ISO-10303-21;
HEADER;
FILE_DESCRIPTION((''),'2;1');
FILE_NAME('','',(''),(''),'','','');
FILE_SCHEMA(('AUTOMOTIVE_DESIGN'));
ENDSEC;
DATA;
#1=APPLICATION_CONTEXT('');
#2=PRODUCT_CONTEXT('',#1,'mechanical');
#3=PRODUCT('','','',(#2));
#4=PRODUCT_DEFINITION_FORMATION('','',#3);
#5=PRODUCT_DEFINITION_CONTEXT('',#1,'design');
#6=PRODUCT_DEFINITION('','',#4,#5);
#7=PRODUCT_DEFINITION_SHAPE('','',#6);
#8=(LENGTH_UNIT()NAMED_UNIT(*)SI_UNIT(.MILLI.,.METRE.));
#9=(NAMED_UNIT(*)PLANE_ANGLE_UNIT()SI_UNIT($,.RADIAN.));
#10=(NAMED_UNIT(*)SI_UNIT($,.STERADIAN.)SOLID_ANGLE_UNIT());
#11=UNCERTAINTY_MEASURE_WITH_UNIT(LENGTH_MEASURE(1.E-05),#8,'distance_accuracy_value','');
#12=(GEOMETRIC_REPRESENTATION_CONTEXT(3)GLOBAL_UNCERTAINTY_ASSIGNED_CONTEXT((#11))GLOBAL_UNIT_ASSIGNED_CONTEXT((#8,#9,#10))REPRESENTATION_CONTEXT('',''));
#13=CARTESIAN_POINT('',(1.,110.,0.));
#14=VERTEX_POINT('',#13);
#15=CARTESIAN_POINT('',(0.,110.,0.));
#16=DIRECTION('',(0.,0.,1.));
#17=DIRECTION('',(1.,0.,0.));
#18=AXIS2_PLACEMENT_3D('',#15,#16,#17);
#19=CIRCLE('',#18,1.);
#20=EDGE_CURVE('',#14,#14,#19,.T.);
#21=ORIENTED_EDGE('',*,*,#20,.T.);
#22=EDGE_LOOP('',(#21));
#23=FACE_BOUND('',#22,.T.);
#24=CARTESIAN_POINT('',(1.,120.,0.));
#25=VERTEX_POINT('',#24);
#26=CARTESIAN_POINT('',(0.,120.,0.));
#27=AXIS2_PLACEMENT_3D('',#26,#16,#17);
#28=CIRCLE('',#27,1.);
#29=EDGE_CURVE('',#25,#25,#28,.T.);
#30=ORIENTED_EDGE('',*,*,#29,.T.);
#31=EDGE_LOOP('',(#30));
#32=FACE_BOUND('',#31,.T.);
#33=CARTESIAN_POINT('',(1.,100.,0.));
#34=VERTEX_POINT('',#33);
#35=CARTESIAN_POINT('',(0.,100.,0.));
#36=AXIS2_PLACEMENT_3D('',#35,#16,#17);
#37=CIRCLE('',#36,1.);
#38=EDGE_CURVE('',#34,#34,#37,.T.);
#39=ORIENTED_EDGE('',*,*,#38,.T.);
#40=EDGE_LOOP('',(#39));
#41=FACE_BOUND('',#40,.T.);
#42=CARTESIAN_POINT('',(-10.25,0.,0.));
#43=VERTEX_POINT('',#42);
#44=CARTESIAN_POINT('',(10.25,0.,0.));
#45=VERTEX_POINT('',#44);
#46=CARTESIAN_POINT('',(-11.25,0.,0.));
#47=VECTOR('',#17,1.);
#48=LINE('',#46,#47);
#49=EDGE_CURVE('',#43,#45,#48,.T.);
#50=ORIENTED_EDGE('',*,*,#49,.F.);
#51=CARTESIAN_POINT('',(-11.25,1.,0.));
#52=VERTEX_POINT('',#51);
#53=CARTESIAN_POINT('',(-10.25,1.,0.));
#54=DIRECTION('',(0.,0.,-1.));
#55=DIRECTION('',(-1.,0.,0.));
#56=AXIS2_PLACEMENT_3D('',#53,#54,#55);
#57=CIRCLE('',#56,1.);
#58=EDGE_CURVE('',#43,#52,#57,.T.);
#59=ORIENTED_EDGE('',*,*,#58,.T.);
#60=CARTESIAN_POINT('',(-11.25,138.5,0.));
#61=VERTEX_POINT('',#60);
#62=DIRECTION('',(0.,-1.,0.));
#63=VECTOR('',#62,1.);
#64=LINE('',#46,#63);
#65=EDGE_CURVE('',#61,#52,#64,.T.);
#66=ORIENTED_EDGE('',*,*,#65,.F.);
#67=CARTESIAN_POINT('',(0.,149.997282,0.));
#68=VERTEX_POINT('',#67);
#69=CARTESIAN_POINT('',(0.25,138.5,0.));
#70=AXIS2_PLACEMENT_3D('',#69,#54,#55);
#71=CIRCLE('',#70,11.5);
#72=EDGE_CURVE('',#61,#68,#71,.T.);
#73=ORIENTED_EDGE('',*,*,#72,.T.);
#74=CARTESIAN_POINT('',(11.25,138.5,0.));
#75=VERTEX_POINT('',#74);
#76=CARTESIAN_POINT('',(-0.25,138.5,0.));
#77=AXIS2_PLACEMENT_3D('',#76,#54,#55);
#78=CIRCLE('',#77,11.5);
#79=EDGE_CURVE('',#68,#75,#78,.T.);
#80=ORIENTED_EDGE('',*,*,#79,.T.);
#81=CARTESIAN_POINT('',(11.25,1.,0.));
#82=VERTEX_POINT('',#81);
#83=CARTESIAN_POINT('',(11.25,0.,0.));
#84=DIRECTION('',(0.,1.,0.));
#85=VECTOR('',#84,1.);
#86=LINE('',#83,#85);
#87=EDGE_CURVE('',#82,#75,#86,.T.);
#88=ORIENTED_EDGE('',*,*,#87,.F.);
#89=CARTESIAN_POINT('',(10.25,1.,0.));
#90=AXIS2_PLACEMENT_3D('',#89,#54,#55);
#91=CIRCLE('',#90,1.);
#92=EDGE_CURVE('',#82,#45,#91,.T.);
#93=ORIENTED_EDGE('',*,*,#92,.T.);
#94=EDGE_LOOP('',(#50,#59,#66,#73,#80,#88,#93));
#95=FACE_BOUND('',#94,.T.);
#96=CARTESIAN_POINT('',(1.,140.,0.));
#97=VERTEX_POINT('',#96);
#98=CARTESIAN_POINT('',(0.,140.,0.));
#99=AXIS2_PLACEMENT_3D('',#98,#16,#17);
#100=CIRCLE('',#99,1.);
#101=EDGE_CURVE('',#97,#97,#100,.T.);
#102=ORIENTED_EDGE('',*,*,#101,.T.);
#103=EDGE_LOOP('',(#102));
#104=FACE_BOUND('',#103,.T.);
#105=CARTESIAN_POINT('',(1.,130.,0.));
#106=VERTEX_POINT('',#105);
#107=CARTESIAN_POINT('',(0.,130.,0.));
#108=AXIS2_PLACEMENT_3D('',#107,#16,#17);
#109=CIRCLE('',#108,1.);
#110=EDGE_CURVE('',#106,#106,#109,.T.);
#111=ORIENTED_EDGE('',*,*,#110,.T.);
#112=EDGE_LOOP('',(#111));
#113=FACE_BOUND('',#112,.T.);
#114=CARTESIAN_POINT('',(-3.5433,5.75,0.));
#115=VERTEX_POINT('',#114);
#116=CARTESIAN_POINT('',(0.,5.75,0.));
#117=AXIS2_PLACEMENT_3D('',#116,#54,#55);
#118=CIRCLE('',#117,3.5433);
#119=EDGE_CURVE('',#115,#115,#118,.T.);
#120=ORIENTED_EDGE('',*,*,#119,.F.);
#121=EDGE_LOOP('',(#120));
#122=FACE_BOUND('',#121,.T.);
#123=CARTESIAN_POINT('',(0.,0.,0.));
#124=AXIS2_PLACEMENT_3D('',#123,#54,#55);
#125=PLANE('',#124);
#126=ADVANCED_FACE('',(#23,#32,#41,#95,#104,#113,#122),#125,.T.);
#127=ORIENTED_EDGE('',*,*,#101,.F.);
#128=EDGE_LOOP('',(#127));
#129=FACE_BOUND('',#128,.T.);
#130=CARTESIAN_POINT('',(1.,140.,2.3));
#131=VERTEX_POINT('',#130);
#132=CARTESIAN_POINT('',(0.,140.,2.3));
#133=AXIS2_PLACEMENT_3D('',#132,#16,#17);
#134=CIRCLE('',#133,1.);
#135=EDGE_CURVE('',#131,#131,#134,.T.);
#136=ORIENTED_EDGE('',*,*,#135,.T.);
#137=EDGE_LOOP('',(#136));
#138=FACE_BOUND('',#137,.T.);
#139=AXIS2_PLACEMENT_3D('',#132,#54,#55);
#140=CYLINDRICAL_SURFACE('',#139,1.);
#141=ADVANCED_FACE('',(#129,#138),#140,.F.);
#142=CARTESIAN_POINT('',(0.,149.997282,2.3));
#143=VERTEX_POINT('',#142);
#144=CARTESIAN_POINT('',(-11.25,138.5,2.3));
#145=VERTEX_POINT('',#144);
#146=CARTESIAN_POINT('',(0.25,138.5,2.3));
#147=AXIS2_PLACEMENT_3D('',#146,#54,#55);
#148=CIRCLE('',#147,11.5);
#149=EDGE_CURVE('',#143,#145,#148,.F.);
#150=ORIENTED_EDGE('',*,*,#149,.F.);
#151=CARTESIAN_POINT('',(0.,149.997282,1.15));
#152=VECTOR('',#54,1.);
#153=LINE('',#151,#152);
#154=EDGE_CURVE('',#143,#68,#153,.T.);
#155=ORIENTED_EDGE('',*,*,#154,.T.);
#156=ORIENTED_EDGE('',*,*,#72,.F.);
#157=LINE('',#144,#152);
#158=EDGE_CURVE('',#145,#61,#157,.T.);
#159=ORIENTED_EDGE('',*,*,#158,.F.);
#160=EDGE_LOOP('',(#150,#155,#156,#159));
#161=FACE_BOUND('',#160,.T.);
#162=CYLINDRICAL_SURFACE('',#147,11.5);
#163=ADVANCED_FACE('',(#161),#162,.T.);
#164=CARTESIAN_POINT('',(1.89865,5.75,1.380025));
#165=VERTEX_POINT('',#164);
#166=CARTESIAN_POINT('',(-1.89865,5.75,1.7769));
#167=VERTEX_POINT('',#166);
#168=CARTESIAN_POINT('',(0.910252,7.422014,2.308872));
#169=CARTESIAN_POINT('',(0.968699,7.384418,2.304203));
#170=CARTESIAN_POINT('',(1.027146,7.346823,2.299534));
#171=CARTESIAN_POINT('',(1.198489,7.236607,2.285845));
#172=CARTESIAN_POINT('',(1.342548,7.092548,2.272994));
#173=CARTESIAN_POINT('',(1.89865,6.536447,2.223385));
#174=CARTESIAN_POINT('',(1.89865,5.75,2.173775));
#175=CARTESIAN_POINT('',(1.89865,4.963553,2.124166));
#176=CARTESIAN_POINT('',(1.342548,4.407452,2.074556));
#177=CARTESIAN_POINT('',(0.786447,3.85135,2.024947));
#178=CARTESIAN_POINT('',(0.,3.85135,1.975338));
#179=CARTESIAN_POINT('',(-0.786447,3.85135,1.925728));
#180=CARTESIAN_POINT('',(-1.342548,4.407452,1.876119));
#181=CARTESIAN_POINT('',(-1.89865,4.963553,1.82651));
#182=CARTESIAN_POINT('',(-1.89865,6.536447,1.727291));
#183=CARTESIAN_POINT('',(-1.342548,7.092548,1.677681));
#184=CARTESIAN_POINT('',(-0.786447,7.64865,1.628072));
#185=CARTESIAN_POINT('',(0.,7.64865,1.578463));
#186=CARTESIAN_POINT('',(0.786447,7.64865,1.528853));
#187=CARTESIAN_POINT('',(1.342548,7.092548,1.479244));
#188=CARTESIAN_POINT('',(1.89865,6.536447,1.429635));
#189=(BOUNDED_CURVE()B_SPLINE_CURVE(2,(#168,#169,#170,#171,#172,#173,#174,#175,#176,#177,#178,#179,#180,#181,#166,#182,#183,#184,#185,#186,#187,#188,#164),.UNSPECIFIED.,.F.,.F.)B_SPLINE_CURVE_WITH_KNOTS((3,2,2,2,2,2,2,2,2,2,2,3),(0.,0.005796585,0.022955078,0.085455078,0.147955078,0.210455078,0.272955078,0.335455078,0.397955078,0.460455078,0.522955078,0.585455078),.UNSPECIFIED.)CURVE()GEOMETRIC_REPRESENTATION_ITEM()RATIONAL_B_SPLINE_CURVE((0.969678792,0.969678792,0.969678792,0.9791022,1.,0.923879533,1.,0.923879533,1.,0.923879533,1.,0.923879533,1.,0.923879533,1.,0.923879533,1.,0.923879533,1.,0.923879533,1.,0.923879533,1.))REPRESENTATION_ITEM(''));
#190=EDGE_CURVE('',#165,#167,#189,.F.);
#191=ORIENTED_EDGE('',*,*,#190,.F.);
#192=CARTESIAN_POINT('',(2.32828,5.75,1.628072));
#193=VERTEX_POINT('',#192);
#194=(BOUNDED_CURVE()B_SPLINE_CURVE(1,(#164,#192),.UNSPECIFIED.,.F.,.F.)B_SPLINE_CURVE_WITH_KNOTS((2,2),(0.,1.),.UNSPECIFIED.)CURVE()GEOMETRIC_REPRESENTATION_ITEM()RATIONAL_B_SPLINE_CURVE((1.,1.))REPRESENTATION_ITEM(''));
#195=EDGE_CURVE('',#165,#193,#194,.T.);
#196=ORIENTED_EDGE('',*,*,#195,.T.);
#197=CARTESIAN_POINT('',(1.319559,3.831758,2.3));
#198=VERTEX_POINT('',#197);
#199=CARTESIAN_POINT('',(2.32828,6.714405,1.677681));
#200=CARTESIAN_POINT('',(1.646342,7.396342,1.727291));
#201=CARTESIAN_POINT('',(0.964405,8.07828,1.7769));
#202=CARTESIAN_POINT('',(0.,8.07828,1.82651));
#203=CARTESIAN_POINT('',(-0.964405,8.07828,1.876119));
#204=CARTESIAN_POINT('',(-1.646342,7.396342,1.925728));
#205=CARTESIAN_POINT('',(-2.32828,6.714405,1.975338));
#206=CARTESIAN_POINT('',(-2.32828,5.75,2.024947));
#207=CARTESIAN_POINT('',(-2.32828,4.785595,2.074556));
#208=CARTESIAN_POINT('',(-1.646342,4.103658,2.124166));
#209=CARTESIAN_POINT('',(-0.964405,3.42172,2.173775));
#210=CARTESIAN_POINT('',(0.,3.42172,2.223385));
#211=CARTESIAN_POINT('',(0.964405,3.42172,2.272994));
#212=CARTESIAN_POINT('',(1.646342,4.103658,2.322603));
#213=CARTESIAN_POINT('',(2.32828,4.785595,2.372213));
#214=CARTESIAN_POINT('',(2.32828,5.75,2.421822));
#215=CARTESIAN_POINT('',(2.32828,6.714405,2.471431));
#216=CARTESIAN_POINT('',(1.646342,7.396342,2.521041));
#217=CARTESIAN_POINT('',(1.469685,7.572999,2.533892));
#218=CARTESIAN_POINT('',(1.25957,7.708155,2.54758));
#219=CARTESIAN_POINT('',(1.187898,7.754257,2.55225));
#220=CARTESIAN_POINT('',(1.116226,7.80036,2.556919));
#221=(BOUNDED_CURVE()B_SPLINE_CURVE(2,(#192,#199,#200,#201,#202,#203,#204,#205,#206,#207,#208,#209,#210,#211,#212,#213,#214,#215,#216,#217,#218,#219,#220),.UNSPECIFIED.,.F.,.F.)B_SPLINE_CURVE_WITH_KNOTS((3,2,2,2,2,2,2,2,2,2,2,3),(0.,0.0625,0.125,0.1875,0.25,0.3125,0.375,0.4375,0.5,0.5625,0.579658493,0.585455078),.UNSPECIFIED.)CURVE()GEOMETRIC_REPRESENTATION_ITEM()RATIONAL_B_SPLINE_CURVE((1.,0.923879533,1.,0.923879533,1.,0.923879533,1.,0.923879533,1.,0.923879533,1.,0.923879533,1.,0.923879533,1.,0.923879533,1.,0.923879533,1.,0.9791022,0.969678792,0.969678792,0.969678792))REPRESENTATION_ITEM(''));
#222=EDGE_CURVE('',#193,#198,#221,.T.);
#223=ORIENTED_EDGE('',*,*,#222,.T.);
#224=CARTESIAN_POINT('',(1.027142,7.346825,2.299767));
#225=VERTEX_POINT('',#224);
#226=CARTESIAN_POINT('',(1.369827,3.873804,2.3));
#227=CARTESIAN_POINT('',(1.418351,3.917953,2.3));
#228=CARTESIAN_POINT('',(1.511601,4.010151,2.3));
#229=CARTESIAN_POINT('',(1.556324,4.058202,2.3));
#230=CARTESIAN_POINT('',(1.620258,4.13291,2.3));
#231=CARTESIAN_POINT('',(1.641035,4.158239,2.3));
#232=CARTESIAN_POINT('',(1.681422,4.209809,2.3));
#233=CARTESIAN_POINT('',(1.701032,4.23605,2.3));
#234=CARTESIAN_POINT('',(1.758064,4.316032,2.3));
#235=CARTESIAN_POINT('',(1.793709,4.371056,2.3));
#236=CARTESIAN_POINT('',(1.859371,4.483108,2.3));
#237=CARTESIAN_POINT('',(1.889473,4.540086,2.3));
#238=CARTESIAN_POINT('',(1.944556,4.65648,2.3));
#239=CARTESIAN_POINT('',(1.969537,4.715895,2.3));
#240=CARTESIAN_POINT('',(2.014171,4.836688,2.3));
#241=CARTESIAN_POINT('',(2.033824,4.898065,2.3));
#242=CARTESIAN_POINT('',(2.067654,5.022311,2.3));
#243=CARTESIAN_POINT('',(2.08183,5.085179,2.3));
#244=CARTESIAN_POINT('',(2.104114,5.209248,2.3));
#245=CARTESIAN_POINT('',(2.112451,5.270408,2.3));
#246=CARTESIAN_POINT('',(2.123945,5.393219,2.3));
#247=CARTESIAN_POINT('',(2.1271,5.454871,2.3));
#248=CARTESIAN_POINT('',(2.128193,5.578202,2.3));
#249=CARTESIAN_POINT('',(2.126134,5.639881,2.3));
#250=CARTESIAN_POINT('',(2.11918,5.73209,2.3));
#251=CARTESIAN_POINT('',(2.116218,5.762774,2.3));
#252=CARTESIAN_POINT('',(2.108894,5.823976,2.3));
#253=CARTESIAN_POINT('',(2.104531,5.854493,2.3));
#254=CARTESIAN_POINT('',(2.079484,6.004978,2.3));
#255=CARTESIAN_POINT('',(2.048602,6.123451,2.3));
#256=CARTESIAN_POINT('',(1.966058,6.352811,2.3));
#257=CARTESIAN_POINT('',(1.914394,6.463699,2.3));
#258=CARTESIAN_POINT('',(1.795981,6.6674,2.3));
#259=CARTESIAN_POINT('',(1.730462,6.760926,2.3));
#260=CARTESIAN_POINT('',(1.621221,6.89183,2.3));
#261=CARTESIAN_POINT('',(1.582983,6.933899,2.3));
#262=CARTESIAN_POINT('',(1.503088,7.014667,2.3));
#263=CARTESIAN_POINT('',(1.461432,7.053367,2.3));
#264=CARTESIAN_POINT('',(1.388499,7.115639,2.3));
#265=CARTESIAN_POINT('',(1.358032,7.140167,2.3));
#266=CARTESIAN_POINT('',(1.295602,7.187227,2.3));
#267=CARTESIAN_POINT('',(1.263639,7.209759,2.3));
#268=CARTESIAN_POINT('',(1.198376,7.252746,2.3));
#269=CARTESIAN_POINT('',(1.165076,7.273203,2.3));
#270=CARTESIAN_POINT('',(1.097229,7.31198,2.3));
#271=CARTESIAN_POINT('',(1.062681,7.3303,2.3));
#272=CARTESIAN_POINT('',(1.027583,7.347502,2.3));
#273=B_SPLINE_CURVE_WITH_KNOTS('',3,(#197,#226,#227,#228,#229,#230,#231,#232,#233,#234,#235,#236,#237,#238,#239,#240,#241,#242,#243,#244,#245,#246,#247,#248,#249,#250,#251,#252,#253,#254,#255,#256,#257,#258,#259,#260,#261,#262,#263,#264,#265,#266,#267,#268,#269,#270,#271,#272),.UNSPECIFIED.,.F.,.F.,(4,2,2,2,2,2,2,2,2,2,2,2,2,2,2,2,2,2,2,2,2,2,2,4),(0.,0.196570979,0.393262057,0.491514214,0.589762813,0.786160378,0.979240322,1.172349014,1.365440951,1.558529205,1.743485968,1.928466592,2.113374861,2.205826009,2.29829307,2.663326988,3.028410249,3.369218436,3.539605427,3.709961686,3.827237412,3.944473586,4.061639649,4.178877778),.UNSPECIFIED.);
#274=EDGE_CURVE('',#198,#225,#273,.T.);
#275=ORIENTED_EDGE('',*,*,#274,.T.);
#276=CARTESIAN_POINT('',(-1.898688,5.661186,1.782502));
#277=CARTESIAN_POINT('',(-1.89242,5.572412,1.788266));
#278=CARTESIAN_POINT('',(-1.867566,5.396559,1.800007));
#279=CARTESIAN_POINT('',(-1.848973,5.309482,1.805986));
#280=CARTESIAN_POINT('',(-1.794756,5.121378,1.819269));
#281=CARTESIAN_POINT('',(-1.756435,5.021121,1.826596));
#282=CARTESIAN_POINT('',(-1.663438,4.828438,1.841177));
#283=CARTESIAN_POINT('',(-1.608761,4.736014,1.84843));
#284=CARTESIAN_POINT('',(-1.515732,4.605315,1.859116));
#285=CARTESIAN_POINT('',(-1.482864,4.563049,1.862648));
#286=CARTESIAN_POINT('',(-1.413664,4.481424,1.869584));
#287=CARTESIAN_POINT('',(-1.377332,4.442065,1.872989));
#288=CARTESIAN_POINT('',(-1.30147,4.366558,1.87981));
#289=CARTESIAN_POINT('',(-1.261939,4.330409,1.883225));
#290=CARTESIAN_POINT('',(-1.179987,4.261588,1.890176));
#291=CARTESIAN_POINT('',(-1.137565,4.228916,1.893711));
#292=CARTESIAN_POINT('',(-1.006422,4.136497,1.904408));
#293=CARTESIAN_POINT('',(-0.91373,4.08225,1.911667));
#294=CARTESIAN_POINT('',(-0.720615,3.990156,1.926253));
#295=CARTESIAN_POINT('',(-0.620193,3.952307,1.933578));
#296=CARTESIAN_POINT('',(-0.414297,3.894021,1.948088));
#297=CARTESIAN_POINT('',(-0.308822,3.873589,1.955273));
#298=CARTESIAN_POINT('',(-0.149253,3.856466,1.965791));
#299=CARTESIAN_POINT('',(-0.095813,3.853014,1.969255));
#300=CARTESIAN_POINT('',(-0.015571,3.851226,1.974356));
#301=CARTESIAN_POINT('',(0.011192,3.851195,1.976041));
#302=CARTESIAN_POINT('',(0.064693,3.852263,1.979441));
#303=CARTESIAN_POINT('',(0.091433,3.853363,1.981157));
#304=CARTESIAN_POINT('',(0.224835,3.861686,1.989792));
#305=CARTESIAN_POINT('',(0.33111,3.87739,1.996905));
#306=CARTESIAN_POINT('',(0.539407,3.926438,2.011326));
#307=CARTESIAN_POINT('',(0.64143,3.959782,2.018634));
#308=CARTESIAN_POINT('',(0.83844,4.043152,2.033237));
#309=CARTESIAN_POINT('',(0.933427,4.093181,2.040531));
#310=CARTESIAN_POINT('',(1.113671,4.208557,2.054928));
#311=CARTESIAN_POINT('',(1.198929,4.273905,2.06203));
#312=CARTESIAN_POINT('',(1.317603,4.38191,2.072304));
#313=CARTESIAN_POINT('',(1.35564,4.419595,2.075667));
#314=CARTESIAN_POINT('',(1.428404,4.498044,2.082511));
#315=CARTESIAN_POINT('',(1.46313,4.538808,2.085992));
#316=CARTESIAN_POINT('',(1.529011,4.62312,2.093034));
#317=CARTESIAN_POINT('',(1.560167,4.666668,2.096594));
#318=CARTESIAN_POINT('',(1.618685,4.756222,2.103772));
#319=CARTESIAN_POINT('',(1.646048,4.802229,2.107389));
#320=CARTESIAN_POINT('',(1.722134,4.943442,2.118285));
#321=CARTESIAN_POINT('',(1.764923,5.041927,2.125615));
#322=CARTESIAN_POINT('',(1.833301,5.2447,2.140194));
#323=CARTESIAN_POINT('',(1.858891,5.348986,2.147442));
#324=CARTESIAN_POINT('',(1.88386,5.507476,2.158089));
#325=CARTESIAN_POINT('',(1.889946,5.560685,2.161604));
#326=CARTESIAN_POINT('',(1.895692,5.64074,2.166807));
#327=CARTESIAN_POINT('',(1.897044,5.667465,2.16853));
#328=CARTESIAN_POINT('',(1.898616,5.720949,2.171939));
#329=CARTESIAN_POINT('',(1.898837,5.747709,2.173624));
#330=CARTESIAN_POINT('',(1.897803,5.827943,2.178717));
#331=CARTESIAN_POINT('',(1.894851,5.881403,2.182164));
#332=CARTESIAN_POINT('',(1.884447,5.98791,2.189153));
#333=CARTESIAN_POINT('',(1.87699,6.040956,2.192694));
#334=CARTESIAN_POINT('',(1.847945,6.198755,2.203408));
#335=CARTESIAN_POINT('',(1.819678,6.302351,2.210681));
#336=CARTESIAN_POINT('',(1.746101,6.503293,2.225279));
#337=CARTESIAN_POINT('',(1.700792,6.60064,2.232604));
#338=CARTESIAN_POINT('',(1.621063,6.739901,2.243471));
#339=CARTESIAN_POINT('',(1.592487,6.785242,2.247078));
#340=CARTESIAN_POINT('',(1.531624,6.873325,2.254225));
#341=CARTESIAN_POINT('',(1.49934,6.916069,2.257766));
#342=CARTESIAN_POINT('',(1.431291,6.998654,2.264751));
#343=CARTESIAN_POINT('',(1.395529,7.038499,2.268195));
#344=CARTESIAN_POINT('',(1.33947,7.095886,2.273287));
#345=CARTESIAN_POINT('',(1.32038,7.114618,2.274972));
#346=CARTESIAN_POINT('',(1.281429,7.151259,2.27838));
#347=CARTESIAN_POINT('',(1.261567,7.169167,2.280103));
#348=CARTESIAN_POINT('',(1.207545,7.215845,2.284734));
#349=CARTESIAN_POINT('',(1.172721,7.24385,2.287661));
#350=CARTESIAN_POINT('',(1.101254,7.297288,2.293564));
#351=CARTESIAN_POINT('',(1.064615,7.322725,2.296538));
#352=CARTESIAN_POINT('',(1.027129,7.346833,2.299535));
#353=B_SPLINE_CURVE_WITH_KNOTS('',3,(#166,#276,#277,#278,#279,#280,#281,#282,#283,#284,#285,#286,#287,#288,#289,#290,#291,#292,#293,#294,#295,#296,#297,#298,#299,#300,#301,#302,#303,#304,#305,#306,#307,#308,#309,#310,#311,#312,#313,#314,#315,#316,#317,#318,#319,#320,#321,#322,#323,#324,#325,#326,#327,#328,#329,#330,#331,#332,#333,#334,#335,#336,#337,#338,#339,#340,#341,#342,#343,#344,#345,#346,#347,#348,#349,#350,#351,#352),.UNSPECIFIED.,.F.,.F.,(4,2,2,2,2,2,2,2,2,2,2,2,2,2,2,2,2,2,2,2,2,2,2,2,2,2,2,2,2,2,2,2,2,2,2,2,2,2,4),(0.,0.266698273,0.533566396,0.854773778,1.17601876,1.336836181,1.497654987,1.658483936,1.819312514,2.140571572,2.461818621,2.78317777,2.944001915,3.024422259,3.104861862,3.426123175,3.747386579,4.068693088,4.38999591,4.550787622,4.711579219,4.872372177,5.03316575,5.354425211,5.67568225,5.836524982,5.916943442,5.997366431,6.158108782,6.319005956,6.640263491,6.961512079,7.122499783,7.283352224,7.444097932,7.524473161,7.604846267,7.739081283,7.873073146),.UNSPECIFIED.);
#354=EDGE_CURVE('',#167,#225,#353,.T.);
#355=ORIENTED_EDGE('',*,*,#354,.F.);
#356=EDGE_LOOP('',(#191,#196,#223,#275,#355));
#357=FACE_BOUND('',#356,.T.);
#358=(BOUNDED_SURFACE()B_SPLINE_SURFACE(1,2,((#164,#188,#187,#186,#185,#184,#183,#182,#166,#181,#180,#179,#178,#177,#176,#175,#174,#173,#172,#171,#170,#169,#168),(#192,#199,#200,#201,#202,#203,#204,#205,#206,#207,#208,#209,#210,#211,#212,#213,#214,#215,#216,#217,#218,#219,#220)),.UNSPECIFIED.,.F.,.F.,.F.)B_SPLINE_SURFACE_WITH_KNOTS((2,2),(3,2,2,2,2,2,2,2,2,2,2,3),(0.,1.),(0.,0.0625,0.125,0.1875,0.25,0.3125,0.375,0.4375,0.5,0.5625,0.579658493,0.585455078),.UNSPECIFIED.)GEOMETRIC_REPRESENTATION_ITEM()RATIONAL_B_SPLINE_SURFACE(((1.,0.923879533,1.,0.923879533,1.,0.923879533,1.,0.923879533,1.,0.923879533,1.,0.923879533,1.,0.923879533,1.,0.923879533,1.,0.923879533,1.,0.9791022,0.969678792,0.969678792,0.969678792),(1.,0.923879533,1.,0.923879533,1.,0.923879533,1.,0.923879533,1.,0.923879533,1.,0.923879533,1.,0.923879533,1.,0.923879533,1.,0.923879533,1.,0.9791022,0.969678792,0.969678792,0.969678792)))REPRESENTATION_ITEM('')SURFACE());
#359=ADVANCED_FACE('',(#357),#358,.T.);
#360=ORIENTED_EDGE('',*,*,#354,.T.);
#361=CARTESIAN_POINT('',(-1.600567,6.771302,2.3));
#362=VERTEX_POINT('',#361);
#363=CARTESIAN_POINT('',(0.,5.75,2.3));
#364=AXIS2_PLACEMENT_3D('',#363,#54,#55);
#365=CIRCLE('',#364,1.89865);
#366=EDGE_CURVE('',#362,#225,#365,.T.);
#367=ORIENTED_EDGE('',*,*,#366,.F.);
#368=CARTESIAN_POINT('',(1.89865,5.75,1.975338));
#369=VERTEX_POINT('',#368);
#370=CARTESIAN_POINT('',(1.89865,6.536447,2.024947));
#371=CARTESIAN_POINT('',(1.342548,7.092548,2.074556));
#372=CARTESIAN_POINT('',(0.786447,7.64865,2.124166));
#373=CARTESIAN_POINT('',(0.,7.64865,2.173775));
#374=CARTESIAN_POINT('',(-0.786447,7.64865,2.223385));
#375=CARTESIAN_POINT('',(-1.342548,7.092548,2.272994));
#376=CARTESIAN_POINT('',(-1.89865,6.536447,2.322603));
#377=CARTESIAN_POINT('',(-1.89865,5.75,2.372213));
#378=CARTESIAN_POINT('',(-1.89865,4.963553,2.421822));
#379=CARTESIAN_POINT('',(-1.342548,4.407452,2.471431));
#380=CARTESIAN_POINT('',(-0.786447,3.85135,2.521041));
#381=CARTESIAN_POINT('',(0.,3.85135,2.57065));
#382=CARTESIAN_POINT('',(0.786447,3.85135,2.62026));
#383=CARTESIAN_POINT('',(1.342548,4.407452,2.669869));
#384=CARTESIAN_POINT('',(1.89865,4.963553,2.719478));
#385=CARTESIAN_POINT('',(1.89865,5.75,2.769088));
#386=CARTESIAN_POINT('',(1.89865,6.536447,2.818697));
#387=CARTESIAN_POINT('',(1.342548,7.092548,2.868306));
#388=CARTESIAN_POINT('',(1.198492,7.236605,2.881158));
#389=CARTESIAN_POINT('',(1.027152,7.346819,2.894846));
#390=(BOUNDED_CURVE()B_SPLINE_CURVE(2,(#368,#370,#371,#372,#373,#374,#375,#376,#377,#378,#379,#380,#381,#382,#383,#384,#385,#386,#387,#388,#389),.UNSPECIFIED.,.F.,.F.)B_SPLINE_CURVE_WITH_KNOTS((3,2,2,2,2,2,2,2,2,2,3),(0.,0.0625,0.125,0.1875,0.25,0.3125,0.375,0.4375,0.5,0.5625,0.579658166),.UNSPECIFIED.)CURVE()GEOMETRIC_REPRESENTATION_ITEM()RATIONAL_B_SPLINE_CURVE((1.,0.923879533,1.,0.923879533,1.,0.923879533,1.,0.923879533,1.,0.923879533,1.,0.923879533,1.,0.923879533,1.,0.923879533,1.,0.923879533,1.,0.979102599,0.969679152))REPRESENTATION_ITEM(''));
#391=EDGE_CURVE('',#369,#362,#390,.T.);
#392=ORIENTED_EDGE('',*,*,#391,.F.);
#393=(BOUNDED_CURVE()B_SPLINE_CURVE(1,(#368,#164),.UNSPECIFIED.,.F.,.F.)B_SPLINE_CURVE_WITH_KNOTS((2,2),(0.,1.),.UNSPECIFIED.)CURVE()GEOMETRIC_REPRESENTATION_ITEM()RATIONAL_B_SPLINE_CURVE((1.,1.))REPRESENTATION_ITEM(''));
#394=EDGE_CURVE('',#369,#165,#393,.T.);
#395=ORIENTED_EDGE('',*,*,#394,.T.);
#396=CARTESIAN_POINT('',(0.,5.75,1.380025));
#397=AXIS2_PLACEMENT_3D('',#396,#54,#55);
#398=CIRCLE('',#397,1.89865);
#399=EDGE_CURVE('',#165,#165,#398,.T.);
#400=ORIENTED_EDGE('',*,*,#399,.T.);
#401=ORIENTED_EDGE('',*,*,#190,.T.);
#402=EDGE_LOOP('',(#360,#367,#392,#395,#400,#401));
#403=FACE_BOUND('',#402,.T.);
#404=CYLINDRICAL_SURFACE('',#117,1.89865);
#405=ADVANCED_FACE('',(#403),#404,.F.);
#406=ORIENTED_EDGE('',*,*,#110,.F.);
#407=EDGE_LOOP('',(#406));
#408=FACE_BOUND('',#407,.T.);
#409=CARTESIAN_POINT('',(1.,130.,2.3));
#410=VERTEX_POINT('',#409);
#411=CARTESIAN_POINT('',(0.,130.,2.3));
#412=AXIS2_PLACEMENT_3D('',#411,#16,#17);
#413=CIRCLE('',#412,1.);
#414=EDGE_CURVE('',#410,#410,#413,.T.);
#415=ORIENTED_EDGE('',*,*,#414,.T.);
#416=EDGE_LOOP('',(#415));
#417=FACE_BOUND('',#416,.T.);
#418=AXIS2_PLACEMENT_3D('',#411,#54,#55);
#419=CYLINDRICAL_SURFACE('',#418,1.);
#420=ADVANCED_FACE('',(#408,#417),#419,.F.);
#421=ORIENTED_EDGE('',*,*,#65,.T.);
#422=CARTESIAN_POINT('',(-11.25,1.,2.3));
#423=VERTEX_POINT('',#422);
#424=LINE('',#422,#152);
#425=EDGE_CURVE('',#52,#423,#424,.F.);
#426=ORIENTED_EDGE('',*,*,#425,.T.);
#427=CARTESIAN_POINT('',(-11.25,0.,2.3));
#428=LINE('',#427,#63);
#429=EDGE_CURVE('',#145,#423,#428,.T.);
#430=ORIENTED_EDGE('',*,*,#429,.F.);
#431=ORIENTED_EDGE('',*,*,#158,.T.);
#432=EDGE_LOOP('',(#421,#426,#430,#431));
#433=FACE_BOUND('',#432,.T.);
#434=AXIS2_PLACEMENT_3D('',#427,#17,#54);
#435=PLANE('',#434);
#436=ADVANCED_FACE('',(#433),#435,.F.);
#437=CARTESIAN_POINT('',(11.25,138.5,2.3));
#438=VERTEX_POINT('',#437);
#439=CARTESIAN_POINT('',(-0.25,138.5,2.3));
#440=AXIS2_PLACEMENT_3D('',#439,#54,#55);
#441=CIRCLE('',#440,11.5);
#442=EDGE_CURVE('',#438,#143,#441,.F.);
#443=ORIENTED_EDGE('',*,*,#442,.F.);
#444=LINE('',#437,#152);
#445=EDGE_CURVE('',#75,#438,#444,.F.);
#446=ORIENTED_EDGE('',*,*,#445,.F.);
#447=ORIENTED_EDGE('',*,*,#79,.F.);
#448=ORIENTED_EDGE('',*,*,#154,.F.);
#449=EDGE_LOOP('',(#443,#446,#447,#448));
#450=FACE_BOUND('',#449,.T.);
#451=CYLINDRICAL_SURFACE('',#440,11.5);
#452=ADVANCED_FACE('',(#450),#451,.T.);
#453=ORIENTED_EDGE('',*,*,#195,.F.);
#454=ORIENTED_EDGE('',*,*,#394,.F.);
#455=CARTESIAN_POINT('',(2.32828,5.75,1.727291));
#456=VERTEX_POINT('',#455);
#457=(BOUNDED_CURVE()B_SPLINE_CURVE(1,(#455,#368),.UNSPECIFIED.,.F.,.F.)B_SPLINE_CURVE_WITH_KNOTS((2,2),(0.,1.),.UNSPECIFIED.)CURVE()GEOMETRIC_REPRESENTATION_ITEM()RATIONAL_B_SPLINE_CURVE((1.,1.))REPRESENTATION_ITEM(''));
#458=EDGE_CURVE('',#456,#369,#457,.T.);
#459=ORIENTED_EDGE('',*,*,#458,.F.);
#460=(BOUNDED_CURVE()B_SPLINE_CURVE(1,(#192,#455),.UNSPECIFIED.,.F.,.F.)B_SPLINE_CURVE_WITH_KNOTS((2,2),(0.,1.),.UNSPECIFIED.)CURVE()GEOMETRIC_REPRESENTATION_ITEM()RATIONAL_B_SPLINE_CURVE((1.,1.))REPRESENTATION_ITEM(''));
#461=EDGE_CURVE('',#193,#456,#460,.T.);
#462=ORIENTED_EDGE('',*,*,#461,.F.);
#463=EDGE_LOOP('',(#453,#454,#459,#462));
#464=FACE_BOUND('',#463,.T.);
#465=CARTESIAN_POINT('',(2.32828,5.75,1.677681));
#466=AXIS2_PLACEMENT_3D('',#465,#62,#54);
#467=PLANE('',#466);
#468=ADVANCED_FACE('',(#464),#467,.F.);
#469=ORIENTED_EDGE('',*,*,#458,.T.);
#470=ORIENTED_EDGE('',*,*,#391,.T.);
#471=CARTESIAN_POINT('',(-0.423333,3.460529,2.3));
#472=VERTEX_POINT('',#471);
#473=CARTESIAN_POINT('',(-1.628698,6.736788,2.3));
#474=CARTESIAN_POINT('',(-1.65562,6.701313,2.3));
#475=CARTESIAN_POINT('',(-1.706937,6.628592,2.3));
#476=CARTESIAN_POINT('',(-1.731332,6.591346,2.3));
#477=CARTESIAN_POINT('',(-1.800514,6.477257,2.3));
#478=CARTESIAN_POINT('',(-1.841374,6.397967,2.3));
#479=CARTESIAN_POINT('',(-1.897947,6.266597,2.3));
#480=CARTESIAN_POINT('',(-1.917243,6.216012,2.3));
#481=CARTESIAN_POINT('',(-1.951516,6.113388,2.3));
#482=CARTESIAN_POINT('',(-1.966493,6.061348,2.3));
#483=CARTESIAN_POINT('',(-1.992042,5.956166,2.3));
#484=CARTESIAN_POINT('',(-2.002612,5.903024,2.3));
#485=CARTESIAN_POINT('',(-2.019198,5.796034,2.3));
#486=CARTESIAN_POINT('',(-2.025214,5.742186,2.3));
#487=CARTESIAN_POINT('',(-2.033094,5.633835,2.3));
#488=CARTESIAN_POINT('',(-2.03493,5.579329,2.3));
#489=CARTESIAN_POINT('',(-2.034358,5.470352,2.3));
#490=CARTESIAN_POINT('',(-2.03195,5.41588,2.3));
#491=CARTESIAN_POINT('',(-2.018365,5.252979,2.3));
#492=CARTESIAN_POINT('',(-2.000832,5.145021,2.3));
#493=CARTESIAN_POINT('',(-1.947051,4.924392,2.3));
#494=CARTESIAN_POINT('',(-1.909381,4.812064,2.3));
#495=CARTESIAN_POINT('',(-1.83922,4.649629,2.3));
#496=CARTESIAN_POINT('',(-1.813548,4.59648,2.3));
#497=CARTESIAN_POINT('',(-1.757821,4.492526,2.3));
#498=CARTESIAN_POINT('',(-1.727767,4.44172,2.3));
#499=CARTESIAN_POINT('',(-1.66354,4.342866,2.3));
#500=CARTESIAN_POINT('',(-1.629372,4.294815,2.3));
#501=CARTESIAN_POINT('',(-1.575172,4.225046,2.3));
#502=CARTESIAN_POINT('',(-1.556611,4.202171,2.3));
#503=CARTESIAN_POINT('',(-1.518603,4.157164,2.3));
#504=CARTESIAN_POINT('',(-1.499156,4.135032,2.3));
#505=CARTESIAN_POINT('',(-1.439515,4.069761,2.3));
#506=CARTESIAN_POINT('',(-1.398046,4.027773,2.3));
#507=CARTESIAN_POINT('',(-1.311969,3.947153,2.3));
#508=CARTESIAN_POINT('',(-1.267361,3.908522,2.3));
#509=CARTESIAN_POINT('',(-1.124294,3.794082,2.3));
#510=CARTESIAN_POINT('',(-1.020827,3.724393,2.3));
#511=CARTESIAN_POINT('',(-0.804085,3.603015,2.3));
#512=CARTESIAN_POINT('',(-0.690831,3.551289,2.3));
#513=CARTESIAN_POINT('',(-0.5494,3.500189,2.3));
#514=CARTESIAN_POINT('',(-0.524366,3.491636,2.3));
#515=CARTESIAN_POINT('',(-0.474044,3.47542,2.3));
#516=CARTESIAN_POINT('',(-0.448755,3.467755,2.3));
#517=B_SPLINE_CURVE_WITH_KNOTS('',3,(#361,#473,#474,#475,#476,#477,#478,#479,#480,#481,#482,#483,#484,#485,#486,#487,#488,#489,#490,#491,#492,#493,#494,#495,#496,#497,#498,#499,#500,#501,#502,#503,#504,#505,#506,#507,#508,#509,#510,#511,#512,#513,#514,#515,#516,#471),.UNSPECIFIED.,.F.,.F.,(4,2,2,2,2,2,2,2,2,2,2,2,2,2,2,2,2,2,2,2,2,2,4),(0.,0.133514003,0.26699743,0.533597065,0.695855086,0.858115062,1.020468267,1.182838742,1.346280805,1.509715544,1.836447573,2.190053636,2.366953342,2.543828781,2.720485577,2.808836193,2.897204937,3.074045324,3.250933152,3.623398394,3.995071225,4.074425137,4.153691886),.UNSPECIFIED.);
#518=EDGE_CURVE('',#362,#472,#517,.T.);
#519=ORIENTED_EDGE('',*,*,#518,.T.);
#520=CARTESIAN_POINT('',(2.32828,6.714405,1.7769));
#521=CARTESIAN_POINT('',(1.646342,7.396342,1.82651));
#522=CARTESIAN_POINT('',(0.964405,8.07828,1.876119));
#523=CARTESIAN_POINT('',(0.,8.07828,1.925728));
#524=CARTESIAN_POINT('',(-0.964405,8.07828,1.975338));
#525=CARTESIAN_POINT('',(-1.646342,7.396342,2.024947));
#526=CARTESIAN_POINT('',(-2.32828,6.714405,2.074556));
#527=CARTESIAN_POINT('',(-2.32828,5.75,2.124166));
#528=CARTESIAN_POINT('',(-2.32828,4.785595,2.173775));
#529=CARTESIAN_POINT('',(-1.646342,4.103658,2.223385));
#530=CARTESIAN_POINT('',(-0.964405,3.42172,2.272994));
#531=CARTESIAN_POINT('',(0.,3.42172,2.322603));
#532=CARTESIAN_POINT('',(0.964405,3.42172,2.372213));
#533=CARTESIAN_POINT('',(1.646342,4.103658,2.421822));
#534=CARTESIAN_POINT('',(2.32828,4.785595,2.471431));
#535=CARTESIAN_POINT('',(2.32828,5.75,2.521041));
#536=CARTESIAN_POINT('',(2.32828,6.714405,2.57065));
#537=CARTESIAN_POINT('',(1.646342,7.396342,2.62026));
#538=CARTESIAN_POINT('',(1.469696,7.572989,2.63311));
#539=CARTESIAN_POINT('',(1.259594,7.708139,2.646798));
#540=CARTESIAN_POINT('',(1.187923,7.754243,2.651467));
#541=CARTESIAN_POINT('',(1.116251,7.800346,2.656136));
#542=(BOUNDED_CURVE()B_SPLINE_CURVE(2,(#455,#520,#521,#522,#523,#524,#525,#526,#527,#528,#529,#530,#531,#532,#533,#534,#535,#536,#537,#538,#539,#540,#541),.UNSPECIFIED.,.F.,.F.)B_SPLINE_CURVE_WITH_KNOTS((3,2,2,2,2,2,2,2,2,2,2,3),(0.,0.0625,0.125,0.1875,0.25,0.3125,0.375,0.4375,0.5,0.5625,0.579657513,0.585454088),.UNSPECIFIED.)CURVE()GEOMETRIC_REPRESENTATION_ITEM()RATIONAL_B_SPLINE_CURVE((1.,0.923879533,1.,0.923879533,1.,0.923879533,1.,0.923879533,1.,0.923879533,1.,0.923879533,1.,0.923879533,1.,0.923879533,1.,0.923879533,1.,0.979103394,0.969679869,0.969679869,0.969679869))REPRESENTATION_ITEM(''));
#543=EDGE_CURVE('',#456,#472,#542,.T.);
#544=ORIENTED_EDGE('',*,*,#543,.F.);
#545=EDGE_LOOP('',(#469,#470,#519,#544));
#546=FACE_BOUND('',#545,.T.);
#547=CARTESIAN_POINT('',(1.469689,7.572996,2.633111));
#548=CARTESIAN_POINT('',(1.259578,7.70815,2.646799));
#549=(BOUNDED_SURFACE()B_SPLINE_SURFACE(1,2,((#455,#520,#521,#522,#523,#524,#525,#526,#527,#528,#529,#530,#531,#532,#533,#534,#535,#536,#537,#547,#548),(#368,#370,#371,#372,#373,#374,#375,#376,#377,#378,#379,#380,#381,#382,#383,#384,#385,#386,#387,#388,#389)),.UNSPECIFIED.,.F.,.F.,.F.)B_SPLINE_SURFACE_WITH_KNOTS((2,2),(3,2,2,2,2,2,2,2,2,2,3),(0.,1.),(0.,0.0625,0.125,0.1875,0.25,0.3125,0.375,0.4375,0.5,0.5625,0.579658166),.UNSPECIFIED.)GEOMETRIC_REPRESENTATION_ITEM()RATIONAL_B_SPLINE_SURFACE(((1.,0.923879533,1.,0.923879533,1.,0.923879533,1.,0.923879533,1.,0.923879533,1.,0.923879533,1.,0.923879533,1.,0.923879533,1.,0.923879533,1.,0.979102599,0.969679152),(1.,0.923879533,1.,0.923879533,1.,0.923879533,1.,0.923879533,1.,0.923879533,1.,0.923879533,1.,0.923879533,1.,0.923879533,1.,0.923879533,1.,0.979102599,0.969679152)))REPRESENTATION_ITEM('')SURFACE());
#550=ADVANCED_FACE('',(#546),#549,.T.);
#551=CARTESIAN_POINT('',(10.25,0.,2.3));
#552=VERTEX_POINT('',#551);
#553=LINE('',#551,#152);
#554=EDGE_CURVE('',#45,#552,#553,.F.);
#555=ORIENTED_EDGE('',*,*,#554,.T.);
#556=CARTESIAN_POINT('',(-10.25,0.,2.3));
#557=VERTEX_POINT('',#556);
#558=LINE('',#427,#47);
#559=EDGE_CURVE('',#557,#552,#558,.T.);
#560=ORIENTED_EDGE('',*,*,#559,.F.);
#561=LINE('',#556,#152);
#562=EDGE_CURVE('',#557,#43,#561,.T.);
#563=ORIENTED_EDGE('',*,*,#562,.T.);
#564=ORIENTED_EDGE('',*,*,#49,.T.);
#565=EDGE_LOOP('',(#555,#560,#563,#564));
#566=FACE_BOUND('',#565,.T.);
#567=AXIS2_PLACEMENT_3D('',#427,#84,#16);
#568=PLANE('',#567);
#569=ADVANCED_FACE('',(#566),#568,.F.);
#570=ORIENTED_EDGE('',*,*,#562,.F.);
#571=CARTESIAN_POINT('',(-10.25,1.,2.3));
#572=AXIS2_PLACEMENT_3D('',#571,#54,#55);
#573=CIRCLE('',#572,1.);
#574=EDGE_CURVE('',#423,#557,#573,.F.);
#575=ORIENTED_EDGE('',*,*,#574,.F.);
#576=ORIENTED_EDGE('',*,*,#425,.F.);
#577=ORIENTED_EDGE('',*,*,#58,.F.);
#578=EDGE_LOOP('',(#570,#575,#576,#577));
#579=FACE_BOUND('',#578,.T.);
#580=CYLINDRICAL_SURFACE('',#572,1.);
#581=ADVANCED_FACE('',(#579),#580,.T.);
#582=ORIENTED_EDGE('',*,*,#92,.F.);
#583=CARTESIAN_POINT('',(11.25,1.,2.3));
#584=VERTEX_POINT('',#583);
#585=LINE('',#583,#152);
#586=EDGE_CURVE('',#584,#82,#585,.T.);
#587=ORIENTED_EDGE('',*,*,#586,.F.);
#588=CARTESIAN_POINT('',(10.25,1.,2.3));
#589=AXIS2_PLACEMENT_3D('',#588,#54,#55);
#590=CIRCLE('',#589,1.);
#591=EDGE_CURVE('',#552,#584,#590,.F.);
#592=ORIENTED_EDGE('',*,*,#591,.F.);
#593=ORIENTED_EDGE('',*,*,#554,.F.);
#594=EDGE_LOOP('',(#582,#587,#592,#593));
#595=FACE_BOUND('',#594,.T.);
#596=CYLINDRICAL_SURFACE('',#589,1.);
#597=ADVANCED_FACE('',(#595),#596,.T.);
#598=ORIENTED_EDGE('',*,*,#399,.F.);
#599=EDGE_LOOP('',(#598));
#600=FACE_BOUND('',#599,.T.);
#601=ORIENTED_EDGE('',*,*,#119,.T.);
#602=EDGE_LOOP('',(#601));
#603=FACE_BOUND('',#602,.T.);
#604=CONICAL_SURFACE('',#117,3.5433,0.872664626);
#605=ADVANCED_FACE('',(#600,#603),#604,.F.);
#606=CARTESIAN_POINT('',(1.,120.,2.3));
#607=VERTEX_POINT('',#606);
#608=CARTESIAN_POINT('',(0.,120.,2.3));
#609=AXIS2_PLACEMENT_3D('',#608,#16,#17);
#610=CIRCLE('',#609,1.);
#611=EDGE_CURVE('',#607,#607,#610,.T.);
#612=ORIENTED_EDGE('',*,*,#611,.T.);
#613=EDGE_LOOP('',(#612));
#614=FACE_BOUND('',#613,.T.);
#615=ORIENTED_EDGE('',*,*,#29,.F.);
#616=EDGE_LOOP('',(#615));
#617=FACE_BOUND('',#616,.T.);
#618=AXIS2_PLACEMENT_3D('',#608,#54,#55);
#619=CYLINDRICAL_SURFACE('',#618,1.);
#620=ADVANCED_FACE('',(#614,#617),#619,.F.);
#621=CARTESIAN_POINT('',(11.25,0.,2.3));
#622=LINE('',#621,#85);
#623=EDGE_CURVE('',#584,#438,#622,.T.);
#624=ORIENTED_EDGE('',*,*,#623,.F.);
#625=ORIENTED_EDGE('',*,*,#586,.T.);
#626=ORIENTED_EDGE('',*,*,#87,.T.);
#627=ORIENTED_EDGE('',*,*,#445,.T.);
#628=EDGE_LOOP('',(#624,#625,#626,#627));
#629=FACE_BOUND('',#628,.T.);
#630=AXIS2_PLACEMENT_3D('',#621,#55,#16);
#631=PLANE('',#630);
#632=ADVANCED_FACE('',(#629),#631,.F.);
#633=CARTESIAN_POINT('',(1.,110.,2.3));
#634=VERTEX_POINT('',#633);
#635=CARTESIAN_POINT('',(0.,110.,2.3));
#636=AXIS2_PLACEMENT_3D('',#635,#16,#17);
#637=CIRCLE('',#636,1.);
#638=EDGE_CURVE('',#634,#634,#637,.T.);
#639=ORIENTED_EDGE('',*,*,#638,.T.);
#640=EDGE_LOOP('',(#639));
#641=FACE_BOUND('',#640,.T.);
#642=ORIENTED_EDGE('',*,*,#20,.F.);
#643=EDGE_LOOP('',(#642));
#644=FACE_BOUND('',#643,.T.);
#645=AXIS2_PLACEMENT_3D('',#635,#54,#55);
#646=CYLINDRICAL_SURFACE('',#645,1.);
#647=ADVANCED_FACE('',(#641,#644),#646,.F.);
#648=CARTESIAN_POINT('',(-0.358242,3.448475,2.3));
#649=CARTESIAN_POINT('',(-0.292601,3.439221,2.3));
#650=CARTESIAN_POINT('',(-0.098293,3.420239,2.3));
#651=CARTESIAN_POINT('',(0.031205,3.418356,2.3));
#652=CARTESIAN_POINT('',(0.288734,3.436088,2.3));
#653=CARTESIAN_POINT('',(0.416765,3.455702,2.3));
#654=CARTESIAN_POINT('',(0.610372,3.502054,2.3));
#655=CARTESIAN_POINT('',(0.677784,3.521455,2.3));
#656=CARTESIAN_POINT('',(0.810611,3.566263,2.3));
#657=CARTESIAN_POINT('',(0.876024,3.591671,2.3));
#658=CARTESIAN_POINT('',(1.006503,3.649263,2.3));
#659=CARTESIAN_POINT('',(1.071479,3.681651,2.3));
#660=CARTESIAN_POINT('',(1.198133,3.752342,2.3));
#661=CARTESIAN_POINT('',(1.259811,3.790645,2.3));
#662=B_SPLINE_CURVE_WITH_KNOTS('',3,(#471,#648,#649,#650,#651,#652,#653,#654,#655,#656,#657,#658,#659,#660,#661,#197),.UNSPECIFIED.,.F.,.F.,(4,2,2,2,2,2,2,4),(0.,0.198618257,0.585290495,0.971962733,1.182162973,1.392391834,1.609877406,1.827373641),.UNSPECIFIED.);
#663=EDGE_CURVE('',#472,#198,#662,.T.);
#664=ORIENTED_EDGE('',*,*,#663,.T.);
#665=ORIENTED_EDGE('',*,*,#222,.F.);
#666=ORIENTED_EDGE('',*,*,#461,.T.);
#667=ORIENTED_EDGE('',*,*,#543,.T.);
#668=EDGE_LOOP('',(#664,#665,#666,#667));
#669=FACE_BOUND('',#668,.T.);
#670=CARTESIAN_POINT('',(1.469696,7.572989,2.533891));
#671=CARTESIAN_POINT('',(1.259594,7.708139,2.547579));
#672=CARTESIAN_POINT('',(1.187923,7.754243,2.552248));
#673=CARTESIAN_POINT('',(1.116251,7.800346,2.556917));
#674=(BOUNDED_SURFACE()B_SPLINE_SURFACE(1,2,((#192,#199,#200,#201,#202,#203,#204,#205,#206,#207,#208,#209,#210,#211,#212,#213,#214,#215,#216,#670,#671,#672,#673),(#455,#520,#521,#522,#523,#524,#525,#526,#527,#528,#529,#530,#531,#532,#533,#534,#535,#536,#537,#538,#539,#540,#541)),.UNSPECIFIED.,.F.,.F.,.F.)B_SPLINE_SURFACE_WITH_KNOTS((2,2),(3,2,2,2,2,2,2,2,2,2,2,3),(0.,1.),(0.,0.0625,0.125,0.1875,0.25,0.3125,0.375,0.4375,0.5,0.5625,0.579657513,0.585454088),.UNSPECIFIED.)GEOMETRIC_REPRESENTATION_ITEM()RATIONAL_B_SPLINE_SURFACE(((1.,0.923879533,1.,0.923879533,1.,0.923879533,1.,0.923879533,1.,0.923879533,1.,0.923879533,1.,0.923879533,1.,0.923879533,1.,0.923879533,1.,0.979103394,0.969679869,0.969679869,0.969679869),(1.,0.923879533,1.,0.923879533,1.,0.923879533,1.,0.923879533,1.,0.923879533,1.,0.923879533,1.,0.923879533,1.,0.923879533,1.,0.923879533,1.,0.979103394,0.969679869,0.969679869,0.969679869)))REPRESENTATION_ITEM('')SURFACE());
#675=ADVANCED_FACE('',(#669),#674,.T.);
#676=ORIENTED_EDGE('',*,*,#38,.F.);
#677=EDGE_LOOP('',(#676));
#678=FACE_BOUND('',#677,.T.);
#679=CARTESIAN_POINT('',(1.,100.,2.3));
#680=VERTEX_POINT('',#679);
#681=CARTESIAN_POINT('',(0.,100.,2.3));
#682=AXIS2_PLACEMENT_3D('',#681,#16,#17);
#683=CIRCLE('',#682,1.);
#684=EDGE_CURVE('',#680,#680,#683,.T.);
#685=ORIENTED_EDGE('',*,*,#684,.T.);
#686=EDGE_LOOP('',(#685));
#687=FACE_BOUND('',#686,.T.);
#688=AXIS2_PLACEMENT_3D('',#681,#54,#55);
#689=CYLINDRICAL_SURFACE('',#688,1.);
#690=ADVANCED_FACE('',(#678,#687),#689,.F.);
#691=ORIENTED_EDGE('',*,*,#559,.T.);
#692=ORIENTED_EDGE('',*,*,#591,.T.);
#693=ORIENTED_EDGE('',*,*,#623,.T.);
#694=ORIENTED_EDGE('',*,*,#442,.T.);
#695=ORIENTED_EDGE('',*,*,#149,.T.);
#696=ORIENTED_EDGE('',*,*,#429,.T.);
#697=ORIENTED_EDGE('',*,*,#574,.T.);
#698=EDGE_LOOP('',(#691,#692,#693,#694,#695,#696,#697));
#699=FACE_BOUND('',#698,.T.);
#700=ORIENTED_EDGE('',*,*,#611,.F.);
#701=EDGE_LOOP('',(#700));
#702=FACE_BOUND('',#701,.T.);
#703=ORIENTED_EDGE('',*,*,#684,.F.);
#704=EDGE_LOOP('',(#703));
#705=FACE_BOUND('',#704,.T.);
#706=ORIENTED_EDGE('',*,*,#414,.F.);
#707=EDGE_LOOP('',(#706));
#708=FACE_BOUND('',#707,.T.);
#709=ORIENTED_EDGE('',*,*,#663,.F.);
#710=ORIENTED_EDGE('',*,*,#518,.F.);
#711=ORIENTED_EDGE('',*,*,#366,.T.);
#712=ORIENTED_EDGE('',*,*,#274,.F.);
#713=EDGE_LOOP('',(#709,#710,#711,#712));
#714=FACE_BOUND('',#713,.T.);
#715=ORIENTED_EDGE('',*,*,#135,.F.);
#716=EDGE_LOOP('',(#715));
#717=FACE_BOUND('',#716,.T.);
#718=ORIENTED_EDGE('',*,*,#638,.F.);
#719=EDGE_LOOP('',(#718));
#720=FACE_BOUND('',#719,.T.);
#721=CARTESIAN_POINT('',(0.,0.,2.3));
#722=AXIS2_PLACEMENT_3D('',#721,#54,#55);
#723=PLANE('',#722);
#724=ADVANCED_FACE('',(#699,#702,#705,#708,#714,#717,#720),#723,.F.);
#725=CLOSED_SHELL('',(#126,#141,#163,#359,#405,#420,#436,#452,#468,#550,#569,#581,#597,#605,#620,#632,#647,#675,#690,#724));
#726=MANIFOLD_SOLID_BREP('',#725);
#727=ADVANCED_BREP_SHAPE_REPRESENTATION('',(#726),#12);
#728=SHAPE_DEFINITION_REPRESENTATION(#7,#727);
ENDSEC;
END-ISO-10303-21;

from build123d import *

# Parameters (mm, degrees)
SKETCH1_W           = 22.5
SKETCH1_H           = 150
SKETCH1_R           = 1
BOSS_EXTRUDE1_DEPTH = 2.3
FILLET1_R           = 11.5
THREAD1_PITCH       = 0.79375
FILLET2_R           = 1


with BuildPart() as part:
    # Sketch1 → Boss-Extrude1 (new body)
    with BuildSketch(Plane.XY):
        with Locations((0, 75)):
            Rectangle(SKETCH1_W, SKETCH1_H)
        with Locations((0, 140)):
            Circle(SKETCH1_R, mode=Mode.SUBTRACT)
        with Locations((0, 130)):
            Circle(SKETCH1_R, mode=Mode.SUBTRACT)
        with Locations((0, 120)):
            Circle(SKETCH1_R, mode=Mode.SUBTRACT)
        with Locations((0, 110)):
            Circle(SKETCH1_R, mode=Mode.SUBTRACT)
        with Locations((0, 100)):
            Circle(SKETCH1_R, mode=Mode.SUBTRACT)
    extrude(amount=BOSS_EXTRUDE1_DEPTH)

    # Fillet1
    # the kernel refuses this fillet: 11.5 mm, written as the material it takes off along each edge
    with BuildSketch(Plane(origin=(11.25, 150, -28.75), x_dir=(0, -1, 0), z_dir=(0, 0, 1)), Plane(origin=(-11.25, 150, -28.75), x_dir=(1, 0, 0), z_dir=(0, 0, 1))) as fillet1_piece_1:
        with BuildLine():
            CenterArc((FILLET1_R, -FILLET1_R), FILLET1_R, 90, 90)
            Line((0, -FILLET1_R), (0, 0))
            Line((0, 0), (FILLET1_R, 0))
        make_face()
    extrude(amount=59.8, mode=Mode.SUBTRACT)

    # Sketch3 → CSK for #6 Flat Head Machine Screw (100)1 (revolve, cut)
    with BuildSketch(Plane(origin=(0, 5.75, 0), x_dir=(0, 1, 0), z_dir=(1, 0, 0))):
        Polygon((0, 0), (0, 2.3), (1.89865, 2.3), (1.89865, 1.380025208), (3.5433, 0), align=None)
    revolve(axis=Axis((0, 5.75, -6.35), (0, 0, 1)), mode=Mode.SUBTRACT)

    # Thread1: the profile of Thread Profile1 profile screwed along a right-hand helix of 1.159023 turns, 8 arcs to a turn; built about Z, then put on its axis
    thread1_z = Axis((0, 0, 0), (0, 0, 1))
    thread1_corners = [(1.89835, 0, -0.000173205), (2.328279788, 0, 0.248046874), (2.328279788, 0, 0.347265624), (1.89835, 0, 0.595485703)]
    with BuildLine(mode=Mode.PRIVATE) as thread1_profile:
        Line(thread1_corners[0], thread1_corners[1])
        Line(thread1_corners[1], thread1_corners[2])
        Line(thread1_corners[2], thread1_corners[3])
        Line(thread1_corners[3], thread1_corners[0])
    thread1_cap = Face(thread1_profile.wire())
    thread1_turn_angles = [0, 22.5, 45, 67.5, 90, 112.5, 135, 157.5, 180, 202.5, 225, 247.5, 270, 292.5, 315, 337.5, 360]
    thread1_turn_weights = [1, 0.9238795325112867, 1, 0.9238795325112867, 1, 0.9238795325112867, 1, 0.9238795325112867, 1, 0.9238795325112867, 1, 0.9238795325112867, 1, 0.9238795325112867, 1, 0.9238795325112867, 1]
    thread1_turn_rails = [Edge.make_bspline([Vector(p[0], p[1], 0).rotate(thread1_z, thread1_turn_angles[k]) / thread1_turn_weights[k] + Vector(0, 0, p[2] + THREAD1_PITCH * thread1_turn_angles[k] / 360) for k in range(17)], [0, 0, 0, 1, 1, 2, 2, 3, 3, 4, 4, 5, 5, 6, 6, 7, 7, 8, 8, 8], 2, thread1_turn_weights) for p in thread1_corners]
    thread1_turn_sides = [Face.make_surface_from_curves(thread1_turn_rails[p[0]], thread1_turn_rails[p[1]]) for p in [(0, 1), (1, 2), (2, 3), (3, 0)]]
    thread1_last_angles = [360, 382.5, 405, 411.124204706, 417.248409411]
    thread1_last_weights = [1, 0.9238795325112867, 1, 0.9942929639578035, 1]
    thread1_last_rails = [Edge.make_bspline([Vector(p[0], p[1], 0).rotate(thread1_z, thread1_last_angles[k]) / thread1_last_weights[k] + Vector(0, 0, p[2] + THREAD1_PITCH * thread1_last_angles[k] / 360) for k in range(5)], [0, 0, 0, 1, 1, 2, 2, 2], 2, thread1_last_weights) for p in thread1_corners]
    thread1_last_sides = [Face.make_surface_from_curves(thread1_last_rails[p[0]], thread1_last_rails[p[1]]) for p in [(0, 1), (1, 2), (2, 3), (3, 0)]]
    thread1 = Plane(origin=(0, 5.75, 1.380025208), x_dir=(1, 0, 0), z_dir=(0, 0, 1)) * Solid(Shell([*thread1_turn_sides, *thread1_last_sides, thread1_cap, thread1_cap.rotate(thread1_z, 417.248409411).moved(Location((0, 0, THREAD1_PITCH * 417.248409411 / 360)))]))
    add(thread1, mode=Mode.SUBTRACT)

    # Fillet2
    fillet2_edges = [part.edges().sort_by_distance(p)[0] for p in [
        (11.25, 0, 1.15),
        (-11.25, 0, 1.15),
    ]]
    fillet(fillet2_edges, radius=FILLET2_R)


solid = part.part
